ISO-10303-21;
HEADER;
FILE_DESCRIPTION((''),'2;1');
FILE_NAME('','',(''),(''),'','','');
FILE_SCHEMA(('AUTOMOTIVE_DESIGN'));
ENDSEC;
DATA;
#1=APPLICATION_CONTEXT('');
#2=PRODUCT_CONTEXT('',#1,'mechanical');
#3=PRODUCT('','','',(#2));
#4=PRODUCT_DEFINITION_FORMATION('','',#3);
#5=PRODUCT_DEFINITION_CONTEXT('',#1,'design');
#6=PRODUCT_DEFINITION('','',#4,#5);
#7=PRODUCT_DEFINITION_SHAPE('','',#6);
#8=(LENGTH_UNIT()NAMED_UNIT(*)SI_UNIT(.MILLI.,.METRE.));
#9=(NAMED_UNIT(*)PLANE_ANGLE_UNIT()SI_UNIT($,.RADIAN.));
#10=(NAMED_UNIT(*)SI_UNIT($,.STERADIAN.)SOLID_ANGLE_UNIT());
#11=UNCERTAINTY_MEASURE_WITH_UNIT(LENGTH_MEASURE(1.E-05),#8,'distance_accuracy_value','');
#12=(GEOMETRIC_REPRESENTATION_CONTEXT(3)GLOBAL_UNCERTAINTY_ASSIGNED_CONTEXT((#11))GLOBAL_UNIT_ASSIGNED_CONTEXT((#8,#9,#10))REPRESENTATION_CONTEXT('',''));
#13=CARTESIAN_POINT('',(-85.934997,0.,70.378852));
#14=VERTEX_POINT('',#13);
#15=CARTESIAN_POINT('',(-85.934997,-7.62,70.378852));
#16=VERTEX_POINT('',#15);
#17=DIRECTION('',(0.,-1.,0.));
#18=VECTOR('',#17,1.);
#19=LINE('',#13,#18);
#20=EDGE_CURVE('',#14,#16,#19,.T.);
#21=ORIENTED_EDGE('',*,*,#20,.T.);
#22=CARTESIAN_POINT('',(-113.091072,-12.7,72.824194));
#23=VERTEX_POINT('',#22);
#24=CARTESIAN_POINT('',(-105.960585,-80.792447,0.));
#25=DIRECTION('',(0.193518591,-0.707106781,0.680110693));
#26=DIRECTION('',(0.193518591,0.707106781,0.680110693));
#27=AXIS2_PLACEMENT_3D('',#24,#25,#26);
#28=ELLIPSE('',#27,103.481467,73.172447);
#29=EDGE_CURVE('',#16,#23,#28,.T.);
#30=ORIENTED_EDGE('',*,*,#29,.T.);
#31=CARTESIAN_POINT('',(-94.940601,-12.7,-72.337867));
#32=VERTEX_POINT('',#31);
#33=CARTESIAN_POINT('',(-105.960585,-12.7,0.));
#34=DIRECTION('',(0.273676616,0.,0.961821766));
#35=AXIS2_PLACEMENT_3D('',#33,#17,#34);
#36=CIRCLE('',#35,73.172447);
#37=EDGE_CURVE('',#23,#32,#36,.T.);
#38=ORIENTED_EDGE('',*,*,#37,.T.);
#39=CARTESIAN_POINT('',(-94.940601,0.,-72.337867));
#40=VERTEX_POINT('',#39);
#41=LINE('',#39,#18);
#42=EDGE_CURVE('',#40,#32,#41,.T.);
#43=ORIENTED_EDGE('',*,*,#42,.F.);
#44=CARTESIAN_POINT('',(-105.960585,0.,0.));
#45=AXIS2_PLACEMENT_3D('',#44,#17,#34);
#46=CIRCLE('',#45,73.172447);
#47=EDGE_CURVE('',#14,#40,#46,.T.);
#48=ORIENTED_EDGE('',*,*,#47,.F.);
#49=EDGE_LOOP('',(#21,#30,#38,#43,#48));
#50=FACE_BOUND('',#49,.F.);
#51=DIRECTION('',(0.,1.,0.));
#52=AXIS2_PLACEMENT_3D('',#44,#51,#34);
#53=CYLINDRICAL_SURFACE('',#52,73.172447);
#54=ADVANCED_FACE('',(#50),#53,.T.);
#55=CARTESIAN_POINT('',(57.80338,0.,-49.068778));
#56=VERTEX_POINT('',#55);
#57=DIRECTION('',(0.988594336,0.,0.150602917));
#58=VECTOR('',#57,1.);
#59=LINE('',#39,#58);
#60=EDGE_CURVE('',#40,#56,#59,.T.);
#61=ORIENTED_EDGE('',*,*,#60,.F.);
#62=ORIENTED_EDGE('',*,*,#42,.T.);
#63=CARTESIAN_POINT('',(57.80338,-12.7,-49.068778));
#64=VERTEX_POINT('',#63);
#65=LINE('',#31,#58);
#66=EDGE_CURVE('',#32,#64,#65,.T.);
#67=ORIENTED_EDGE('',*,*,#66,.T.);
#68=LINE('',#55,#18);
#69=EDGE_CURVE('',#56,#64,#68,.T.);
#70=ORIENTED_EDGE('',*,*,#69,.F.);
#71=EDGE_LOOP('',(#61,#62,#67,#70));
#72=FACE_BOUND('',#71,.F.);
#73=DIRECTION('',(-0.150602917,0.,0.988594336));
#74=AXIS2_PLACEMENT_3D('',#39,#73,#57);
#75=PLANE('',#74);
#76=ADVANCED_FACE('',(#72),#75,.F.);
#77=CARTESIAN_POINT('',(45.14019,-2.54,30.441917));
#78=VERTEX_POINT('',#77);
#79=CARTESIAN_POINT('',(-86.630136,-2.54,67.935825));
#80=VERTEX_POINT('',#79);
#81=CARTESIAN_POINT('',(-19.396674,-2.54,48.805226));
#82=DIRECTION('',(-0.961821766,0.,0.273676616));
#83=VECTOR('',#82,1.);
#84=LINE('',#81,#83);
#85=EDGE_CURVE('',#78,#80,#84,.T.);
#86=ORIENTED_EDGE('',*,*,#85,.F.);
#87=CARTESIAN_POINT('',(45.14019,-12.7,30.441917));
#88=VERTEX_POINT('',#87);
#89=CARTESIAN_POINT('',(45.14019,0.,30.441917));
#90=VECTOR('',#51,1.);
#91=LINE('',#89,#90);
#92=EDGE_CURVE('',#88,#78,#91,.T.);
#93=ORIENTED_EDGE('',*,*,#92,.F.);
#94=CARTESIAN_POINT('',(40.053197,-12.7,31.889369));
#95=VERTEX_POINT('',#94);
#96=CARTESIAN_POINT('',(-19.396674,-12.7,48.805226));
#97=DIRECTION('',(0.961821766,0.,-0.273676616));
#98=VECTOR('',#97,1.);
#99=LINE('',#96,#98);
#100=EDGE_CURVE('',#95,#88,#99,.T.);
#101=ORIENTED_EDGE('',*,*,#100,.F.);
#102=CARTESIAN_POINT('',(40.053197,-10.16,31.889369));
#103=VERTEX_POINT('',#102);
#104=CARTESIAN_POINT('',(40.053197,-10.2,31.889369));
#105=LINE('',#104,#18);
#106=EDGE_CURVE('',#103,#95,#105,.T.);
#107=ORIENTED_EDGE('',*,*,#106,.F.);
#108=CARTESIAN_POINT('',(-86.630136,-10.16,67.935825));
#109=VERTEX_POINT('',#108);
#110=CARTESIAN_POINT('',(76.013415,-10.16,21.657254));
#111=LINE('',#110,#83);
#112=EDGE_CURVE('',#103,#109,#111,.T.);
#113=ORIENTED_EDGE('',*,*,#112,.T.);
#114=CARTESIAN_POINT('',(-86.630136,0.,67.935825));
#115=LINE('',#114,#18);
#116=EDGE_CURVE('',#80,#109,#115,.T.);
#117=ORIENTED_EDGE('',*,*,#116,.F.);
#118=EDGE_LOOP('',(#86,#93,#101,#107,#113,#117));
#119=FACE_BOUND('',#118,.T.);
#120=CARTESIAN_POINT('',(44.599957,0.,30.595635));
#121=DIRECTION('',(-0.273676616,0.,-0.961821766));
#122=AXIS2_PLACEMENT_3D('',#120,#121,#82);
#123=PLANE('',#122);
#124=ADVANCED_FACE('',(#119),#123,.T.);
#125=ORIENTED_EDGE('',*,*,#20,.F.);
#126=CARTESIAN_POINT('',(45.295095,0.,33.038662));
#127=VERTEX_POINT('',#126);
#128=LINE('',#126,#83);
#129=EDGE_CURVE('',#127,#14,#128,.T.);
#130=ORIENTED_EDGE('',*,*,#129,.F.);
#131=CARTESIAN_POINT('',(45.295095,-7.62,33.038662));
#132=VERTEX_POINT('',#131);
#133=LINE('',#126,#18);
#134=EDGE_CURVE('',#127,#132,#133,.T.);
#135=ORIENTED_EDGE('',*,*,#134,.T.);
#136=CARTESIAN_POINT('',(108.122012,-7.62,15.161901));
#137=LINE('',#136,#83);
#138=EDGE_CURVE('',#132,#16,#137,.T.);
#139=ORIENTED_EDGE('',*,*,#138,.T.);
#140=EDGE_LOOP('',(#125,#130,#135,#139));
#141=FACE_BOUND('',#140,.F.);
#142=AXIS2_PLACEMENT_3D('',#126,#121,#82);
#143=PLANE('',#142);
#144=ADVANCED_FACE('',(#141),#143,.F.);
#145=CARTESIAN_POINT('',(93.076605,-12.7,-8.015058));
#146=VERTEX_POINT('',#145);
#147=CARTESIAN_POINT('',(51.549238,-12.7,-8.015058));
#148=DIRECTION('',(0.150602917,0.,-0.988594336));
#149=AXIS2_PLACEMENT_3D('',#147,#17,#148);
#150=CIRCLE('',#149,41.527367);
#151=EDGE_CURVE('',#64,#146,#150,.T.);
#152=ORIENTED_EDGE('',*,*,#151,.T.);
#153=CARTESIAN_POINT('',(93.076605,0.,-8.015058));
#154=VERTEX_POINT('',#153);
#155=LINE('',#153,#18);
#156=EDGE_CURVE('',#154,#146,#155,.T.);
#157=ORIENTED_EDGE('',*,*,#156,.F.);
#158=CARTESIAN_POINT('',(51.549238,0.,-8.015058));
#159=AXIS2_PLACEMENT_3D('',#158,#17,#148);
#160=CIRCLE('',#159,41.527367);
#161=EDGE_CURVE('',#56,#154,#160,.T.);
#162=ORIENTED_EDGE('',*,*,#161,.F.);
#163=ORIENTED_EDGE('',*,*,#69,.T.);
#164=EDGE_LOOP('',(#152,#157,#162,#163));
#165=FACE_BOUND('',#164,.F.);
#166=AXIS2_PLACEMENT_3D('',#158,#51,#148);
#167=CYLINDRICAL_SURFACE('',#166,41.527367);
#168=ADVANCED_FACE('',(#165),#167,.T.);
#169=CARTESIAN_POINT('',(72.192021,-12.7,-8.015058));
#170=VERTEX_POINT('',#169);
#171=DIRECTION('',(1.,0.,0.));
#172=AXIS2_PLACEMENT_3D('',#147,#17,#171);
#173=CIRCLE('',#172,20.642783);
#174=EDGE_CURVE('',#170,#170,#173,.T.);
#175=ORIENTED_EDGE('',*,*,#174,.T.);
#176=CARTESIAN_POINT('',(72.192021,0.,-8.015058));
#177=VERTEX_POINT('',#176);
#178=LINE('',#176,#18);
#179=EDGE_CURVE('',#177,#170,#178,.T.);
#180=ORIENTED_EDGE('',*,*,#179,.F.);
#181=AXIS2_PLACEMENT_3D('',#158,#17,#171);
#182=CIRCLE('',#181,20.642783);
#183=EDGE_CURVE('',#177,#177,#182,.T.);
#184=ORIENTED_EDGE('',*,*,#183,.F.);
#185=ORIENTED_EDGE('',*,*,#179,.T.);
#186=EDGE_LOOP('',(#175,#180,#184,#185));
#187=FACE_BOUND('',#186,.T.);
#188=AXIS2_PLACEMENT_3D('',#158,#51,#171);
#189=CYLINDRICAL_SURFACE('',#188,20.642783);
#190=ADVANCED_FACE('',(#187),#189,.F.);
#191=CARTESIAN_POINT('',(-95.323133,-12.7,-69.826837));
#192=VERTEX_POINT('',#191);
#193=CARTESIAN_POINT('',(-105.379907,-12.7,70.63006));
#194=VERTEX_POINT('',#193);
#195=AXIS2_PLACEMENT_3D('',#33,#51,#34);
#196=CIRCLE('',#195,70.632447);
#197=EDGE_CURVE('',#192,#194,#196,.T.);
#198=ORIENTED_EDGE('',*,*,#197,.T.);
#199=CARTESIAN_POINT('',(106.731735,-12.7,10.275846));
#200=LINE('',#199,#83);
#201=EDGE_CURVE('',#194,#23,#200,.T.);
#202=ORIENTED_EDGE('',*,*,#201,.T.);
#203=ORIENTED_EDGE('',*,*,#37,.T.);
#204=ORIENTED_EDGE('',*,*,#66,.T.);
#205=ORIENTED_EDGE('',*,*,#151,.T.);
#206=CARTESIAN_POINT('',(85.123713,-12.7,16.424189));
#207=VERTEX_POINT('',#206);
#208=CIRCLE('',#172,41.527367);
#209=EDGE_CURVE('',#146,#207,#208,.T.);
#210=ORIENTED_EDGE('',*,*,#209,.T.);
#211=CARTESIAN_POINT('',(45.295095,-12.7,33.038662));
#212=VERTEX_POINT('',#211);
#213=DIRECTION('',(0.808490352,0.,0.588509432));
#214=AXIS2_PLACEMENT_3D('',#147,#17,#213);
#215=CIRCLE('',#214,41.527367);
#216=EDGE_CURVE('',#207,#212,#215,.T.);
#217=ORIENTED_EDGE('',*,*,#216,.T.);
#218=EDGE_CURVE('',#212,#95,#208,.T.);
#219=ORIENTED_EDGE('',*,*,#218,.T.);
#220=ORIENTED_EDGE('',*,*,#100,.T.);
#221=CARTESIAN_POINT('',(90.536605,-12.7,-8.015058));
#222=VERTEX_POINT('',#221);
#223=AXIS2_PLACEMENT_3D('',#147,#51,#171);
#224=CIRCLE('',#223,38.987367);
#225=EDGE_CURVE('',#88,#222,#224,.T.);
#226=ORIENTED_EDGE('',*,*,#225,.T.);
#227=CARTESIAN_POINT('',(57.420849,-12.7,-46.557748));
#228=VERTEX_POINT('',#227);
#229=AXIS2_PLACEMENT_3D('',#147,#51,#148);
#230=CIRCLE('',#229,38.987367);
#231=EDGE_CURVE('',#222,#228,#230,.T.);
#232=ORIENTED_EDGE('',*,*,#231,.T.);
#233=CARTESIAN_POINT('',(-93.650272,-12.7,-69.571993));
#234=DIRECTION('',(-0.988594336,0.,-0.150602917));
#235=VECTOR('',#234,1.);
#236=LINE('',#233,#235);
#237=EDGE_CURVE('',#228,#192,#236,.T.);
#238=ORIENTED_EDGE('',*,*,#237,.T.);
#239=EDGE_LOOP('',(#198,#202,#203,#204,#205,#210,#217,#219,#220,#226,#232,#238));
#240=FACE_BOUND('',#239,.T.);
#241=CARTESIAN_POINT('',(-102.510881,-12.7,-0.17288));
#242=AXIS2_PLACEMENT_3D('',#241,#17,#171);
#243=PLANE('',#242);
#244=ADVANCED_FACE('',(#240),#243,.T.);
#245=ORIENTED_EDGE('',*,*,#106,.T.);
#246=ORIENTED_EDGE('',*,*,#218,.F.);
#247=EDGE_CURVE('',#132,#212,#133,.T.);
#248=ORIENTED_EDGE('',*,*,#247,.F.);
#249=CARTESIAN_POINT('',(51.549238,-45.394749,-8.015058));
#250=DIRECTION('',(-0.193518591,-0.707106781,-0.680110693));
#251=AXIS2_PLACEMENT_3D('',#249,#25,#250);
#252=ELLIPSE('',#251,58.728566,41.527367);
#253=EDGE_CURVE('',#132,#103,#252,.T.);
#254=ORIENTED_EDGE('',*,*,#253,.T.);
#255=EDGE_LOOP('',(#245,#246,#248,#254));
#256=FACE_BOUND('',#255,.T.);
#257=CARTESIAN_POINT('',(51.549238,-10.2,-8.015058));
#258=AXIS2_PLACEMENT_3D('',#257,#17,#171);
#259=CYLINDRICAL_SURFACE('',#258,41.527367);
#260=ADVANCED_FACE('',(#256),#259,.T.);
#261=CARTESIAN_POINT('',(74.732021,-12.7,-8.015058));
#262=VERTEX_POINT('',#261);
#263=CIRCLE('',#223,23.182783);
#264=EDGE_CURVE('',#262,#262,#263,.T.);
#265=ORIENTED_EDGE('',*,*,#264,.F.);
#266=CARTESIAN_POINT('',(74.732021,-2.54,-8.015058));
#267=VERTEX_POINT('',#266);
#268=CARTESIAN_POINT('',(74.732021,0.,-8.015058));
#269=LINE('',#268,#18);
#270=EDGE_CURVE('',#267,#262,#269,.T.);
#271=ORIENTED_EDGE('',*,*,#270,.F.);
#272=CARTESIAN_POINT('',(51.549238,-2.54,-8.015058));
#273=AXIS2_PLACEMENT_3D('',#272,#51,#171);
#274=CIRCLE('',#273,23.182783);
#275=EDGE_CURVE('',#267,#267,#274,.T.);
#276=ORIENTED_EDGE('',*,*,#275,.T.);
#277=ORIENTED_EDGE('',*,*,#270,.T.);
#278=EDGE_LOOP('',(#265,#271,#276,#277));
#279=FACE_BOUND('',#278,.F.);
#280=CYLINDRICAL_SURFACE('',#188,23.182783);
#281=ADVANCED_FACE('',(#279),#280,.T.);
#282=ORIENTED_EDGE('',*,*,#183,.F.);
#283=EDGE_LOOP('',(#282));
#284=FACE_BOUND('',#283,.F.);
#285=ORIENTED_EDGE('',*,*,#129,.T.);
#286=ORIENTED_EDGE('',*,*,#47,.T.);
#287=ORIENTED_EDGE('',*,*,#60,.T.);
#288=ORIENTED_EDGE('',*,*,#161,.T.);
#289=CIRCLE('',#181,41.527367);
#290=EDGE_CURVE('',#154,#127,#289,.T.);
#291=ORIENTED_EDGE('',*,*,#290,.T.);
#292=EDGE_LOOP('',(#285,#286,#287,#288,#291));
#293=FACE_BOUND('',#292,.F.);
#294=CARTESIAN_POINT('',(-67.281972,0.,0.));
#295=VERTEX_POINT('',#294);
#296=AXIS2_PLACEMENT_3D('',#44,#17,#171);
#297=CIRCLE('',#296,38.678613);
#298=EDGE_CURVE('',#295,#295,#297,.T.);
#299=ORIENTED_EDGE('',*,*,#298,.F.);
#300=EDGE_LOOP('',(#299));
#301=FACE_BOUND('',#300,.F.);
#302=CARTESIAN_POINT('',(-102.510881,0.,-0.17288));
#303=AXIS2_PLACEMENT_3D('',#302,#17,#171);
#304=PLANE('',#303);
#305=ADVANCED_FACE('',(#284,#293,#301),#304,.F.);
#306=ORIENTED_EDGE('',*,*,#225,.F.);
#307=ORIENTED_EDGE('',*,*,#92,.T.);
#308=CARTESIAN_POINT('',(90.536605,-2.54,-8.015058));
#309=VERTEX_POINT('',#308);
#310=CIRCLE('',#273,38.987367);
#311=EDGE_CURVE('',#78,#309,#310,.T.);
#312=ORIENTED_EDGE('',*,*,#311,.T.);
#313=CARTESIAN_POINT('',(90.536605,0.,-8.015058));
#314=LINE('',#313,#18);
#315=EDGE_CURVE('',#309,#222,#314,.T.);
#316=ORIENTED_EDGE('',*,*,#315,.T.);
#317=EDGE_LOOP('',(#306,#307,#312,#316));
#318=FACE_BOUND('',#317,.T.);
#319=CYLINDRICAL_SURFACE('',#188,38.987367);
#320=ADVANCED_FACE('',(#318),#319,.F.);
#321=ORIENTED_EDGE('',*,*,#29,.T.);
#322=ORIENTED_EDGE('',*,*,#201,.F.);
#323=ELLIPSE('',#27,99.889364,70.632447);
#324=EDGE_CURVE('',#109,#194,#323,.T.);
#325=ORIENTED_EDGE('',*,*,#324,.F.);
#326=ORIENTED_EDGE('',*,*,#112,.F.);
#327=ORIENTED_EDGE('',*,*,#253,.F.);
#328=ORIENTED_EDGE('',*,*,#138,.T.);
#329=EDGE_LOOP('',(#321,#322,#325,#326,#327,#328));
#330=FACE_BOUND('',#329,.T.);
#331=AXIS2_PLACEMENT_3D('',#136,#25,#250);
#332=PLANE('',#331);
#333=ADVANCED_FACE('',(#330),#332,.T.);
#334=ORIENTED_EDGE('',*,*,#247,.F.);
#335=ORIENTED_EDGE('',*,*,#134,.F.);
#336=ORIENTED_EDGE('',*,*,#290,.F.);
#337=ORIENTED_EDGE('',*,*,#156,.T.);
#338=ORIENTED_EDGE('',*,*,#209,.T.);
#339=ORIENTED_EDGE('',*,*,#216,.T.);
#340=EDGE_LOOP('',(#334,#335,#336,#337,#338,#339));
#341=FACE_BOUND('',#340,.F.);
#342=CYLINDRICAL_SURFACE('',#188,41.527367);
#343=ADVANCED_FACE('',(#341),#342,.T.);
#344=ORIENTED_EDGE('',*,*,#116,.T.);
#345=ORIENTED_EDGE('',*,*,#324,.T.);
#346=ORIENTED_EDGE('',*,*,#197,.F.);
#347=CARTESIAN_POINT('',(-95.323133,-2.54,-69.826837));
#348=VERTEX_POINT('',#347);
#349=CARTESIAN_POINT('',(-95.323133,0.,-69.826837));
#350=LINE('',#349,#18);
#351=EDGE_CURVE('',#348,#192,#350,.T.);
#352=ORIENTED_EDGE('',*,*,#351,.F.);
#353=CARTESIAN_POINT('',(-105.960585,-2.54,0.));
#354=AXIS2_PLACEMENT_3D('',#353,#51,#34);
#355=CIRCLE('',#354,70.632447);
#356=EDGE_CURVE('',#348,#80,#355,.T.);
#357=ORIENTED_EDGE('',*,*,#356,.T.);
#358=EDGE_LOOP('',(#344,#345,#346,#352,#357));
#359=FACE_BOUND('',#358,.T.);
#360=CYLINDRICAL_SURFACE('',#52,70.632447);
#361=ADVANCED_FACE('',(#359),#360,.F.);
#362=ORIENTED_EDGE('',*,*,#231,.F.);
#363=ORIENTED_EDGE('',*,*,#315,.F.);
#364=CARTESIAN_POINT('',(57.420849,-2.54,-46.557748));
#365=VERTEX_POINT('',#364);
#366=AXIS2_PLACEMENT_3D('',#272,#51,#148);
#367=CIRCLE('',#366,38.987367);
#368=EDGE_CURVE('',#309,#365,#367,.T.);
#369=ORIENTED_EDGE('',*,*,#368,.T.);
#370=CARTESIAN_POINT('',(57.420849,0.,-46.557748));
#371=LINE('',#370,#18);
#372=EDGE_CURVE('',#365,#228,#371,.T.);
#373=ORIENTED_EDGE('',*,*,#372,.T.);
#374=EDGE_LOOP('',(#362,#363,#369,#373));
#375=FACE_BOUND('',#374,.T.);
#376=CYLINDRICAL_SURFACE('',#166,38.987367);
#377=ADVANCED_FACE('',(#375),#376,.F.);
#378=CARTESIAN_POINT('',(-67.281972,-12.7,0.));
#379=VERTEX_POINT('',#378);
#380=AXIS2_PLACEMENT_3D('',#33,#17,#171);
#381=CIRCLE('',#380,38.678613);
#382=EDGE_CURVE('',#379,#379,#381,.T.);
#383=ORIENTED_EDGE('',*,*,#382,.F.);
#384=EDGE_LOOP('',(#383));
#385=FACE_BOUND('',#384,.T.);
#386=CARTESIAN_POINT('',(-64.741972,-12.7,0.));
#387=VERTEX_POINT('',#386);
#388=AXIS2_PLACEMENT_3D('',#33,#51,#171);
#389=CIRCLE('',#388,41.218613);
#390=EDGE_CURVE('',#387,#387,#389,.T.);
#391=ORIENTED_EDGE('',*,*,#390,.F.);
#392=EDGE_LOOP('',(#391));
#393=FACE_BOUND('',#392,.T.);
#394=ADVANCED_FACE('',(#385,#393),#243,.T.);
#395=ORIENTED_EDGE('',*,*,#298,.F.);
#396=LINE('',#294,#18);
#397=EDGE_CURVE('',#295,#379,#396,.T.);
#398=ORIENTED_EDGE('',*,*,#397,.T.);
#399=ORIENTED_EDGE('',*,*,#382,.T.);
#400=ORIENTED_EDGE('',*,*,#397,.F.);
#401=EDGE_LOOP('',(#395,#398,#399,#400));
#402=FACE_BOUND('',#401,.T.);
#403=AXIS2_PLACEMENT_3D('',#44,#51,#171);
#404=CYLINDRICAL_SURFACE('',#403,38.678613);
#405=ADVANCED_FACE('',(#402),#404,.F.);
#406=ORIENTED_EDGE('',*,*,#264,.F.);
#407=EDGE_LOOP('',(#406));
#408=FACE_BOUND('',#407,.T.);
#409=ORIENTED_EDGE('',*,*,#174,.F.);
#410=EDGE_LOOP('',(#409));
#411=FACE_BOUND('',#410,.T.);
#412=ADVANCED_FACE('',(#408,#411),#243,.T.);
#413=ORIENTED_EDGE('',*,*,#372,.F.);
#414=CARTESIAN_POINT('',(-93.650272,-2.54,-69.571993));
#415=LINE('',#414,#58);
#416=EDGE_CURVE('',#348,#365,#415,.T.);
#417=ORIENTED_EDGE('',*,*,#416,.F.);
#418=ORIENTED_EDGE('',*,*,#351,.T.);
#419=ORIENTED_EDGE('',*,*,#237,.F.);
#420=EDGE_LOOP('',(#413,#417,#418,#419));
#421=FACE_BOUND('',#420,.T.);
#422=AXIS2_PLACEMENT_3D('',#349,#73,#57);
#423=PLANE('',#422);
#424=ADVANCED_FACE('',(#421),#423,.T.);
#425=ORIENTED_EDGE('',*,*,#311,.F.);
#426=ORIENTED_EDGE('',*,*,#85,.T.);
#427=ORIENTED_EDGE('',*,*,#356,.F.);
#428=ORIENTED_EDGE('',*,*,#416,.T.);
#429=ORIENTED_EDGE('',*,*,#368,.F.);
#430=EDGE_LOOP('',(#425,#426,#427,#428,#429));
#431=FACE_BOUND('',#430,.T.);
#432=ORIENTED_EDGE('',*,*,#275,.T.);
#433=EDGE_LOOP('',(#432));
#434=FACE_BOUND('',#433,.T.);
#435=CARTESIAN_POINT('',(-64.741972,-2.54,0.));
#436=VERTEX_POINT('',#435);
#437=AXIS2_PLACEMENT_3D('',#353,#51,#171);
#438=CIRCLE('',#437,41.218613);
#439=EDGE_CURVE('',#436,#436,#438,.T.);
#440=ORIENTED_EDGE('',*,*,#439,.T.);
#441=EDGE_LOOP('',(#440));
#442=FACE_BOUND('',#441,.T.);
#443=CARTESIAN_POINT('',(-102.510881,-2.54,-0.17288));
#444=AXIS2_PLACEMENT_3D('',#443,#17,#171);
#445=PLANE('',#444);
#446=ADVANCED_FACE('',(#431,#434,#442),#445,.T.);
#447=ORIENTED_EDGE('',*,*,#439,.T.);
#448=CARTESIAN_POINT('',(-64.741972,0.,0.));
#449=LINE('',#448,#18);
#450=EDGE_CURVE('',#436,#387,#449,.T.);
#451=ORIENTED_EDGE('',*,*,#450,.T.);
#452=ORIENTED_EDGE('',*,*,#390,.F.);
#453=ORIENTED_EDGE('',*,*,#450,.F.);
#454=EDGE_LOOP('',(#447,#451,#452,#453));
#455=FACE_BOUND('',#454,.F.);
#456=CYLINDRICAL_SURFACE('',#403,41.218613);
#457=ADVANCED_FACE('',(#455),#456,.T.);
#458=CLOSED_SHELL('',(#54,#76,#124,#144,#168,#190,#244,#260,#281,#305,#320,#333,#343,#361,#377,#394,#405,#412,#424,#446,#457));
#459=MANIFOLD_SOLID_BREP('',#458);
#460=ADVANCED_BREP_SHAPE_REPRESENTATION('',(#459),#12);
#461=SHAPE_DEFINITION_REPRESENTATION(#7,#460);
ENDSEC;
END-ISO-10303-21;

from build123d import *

# Parameters (mm, degrees)
F0_R        = 38.6786134899
F0_R_2      = 20.6427828865
F1_DEPTH    = 12.7
F2_T        = -2.54
F3_T4_DEPTH = 240.9522929605
F3_S5_R     = 41.5273672124
F3_T6_DEPTH = 123


# Not quite as in the source:
# - a fillet or chamfer that OpenCascade refuses, or shapes differently, is made with other operations: its cross-section is extruded or revolved along the edge and cut away or added


with BuildPart() as f1:
    # F0 (on Front) → F1 (new body)
    with BuildSketch(Plane.XZ):
        with BuildLine():
            ThreePointArc((-94.9406012258, -72.3378666508), (-50.4602870277, -47.6856781771), (-32.7881381913, 0))
            ThreePointArc((-32.7881381913, 0), (-47.5673995621, 44.0958373502), (-85.9349974728, 70.3788521857))
            ThreePointArc((-85.9349974728, 70.3788521857), (-178.9877879079, 4.6081079803), (-94.9406012258, -72.3378666508))
        make_face()
        with Locations((-105.9605851769, 0)):
            Circle(F0_R, mode=Mode.SUBTRACT)
        with BuildLine():
            ThreePointArc((-85.9349974728, 70.3788521857), (-47.5673995621, 44.0958373502), (-32.7881381913, 0))
            ThreePointArc((-32.7881381913, 0), (-50.4602870277, -47.6856781771), (-94.9406012258, -72.3378666508))
            Line((-94.9406012258, -72.3378666508), (57.8033803815, -49.0687780824))
            ThreePointArc((57.8033803815, -49.0687780824), (10.4955177286, -14.2692006943), (45.2950951166, 33.0386619586))
            Line((45.2950951166, 33.0386619586), (-85.9349974728, 70.3788521857))
        make_face()
        with BuildLine():
            ThreePointArc((93.0766049614, -8.0150580619), (78.6121658048, 23.4828808015), (45.2950951166, 33.0386619586))
            ThreePointArc((45.2950951166, 33.0386619586), (10.4955177286, -14.2692006943), (57.8033803815, -49.0687780824))
            ThreePointArc((57.8033803815, -49.0687780824), (83.0471766125, -35.0779861176), (93.0766049614, -8.0150580619))
        make_face()
        with Locations((51.5492377491, -8.0150580619)):
            Circle(F0_R_2, mode=Mode.SUBTRACT)
    extrude(amount=F1_DEPTH)

    # F2
    f2_openings = [f1.faces().sort_by_distance(p)[0] for p in [
        (-50.29361, -12.7, -3.378795),
    ]]
    offset(amount=F2_T, openings=f2_openings, kind=Kind.INTERSECTION)

    # F3: chamfer of 5.08 on 1 edges, made by hand


with BuildPart() as f3_tool2:
    # F3_s3 → F3_t4 (new body)
    with BuildSketch(Plane(origin=(96.0327547633, 0, -27.3251451716), x_dir=(0, 1, 0), z_dir=(-0.961821766, 0, 0.2736766164))):
        Polygon((-7.62, -44.1735125635), (-12.7, -39.0935125635), (-12.7, -44.1735125635), align=None)
    extrude(amount=F3_T4_DEPTH)

    # F3_s5 → F3_t6 (cut, symmetric)
    with BuildSketch(Plane.XZ.offset(10.2)):
        with Locations((51.5492377491, -8.0150580619)):
            Circle(F3_S5_R)
    extrude(amount=F3_T6_DEPTH, both=True, mode=Mode.SUBTRACT)


with BuildPart() as f1_1:
    add(f1.part)

    # F3_t1: cut F3_tool2
    add(f3_tool2.part, mode=Mode.SUBTRACT)


solid = f1_1.part
